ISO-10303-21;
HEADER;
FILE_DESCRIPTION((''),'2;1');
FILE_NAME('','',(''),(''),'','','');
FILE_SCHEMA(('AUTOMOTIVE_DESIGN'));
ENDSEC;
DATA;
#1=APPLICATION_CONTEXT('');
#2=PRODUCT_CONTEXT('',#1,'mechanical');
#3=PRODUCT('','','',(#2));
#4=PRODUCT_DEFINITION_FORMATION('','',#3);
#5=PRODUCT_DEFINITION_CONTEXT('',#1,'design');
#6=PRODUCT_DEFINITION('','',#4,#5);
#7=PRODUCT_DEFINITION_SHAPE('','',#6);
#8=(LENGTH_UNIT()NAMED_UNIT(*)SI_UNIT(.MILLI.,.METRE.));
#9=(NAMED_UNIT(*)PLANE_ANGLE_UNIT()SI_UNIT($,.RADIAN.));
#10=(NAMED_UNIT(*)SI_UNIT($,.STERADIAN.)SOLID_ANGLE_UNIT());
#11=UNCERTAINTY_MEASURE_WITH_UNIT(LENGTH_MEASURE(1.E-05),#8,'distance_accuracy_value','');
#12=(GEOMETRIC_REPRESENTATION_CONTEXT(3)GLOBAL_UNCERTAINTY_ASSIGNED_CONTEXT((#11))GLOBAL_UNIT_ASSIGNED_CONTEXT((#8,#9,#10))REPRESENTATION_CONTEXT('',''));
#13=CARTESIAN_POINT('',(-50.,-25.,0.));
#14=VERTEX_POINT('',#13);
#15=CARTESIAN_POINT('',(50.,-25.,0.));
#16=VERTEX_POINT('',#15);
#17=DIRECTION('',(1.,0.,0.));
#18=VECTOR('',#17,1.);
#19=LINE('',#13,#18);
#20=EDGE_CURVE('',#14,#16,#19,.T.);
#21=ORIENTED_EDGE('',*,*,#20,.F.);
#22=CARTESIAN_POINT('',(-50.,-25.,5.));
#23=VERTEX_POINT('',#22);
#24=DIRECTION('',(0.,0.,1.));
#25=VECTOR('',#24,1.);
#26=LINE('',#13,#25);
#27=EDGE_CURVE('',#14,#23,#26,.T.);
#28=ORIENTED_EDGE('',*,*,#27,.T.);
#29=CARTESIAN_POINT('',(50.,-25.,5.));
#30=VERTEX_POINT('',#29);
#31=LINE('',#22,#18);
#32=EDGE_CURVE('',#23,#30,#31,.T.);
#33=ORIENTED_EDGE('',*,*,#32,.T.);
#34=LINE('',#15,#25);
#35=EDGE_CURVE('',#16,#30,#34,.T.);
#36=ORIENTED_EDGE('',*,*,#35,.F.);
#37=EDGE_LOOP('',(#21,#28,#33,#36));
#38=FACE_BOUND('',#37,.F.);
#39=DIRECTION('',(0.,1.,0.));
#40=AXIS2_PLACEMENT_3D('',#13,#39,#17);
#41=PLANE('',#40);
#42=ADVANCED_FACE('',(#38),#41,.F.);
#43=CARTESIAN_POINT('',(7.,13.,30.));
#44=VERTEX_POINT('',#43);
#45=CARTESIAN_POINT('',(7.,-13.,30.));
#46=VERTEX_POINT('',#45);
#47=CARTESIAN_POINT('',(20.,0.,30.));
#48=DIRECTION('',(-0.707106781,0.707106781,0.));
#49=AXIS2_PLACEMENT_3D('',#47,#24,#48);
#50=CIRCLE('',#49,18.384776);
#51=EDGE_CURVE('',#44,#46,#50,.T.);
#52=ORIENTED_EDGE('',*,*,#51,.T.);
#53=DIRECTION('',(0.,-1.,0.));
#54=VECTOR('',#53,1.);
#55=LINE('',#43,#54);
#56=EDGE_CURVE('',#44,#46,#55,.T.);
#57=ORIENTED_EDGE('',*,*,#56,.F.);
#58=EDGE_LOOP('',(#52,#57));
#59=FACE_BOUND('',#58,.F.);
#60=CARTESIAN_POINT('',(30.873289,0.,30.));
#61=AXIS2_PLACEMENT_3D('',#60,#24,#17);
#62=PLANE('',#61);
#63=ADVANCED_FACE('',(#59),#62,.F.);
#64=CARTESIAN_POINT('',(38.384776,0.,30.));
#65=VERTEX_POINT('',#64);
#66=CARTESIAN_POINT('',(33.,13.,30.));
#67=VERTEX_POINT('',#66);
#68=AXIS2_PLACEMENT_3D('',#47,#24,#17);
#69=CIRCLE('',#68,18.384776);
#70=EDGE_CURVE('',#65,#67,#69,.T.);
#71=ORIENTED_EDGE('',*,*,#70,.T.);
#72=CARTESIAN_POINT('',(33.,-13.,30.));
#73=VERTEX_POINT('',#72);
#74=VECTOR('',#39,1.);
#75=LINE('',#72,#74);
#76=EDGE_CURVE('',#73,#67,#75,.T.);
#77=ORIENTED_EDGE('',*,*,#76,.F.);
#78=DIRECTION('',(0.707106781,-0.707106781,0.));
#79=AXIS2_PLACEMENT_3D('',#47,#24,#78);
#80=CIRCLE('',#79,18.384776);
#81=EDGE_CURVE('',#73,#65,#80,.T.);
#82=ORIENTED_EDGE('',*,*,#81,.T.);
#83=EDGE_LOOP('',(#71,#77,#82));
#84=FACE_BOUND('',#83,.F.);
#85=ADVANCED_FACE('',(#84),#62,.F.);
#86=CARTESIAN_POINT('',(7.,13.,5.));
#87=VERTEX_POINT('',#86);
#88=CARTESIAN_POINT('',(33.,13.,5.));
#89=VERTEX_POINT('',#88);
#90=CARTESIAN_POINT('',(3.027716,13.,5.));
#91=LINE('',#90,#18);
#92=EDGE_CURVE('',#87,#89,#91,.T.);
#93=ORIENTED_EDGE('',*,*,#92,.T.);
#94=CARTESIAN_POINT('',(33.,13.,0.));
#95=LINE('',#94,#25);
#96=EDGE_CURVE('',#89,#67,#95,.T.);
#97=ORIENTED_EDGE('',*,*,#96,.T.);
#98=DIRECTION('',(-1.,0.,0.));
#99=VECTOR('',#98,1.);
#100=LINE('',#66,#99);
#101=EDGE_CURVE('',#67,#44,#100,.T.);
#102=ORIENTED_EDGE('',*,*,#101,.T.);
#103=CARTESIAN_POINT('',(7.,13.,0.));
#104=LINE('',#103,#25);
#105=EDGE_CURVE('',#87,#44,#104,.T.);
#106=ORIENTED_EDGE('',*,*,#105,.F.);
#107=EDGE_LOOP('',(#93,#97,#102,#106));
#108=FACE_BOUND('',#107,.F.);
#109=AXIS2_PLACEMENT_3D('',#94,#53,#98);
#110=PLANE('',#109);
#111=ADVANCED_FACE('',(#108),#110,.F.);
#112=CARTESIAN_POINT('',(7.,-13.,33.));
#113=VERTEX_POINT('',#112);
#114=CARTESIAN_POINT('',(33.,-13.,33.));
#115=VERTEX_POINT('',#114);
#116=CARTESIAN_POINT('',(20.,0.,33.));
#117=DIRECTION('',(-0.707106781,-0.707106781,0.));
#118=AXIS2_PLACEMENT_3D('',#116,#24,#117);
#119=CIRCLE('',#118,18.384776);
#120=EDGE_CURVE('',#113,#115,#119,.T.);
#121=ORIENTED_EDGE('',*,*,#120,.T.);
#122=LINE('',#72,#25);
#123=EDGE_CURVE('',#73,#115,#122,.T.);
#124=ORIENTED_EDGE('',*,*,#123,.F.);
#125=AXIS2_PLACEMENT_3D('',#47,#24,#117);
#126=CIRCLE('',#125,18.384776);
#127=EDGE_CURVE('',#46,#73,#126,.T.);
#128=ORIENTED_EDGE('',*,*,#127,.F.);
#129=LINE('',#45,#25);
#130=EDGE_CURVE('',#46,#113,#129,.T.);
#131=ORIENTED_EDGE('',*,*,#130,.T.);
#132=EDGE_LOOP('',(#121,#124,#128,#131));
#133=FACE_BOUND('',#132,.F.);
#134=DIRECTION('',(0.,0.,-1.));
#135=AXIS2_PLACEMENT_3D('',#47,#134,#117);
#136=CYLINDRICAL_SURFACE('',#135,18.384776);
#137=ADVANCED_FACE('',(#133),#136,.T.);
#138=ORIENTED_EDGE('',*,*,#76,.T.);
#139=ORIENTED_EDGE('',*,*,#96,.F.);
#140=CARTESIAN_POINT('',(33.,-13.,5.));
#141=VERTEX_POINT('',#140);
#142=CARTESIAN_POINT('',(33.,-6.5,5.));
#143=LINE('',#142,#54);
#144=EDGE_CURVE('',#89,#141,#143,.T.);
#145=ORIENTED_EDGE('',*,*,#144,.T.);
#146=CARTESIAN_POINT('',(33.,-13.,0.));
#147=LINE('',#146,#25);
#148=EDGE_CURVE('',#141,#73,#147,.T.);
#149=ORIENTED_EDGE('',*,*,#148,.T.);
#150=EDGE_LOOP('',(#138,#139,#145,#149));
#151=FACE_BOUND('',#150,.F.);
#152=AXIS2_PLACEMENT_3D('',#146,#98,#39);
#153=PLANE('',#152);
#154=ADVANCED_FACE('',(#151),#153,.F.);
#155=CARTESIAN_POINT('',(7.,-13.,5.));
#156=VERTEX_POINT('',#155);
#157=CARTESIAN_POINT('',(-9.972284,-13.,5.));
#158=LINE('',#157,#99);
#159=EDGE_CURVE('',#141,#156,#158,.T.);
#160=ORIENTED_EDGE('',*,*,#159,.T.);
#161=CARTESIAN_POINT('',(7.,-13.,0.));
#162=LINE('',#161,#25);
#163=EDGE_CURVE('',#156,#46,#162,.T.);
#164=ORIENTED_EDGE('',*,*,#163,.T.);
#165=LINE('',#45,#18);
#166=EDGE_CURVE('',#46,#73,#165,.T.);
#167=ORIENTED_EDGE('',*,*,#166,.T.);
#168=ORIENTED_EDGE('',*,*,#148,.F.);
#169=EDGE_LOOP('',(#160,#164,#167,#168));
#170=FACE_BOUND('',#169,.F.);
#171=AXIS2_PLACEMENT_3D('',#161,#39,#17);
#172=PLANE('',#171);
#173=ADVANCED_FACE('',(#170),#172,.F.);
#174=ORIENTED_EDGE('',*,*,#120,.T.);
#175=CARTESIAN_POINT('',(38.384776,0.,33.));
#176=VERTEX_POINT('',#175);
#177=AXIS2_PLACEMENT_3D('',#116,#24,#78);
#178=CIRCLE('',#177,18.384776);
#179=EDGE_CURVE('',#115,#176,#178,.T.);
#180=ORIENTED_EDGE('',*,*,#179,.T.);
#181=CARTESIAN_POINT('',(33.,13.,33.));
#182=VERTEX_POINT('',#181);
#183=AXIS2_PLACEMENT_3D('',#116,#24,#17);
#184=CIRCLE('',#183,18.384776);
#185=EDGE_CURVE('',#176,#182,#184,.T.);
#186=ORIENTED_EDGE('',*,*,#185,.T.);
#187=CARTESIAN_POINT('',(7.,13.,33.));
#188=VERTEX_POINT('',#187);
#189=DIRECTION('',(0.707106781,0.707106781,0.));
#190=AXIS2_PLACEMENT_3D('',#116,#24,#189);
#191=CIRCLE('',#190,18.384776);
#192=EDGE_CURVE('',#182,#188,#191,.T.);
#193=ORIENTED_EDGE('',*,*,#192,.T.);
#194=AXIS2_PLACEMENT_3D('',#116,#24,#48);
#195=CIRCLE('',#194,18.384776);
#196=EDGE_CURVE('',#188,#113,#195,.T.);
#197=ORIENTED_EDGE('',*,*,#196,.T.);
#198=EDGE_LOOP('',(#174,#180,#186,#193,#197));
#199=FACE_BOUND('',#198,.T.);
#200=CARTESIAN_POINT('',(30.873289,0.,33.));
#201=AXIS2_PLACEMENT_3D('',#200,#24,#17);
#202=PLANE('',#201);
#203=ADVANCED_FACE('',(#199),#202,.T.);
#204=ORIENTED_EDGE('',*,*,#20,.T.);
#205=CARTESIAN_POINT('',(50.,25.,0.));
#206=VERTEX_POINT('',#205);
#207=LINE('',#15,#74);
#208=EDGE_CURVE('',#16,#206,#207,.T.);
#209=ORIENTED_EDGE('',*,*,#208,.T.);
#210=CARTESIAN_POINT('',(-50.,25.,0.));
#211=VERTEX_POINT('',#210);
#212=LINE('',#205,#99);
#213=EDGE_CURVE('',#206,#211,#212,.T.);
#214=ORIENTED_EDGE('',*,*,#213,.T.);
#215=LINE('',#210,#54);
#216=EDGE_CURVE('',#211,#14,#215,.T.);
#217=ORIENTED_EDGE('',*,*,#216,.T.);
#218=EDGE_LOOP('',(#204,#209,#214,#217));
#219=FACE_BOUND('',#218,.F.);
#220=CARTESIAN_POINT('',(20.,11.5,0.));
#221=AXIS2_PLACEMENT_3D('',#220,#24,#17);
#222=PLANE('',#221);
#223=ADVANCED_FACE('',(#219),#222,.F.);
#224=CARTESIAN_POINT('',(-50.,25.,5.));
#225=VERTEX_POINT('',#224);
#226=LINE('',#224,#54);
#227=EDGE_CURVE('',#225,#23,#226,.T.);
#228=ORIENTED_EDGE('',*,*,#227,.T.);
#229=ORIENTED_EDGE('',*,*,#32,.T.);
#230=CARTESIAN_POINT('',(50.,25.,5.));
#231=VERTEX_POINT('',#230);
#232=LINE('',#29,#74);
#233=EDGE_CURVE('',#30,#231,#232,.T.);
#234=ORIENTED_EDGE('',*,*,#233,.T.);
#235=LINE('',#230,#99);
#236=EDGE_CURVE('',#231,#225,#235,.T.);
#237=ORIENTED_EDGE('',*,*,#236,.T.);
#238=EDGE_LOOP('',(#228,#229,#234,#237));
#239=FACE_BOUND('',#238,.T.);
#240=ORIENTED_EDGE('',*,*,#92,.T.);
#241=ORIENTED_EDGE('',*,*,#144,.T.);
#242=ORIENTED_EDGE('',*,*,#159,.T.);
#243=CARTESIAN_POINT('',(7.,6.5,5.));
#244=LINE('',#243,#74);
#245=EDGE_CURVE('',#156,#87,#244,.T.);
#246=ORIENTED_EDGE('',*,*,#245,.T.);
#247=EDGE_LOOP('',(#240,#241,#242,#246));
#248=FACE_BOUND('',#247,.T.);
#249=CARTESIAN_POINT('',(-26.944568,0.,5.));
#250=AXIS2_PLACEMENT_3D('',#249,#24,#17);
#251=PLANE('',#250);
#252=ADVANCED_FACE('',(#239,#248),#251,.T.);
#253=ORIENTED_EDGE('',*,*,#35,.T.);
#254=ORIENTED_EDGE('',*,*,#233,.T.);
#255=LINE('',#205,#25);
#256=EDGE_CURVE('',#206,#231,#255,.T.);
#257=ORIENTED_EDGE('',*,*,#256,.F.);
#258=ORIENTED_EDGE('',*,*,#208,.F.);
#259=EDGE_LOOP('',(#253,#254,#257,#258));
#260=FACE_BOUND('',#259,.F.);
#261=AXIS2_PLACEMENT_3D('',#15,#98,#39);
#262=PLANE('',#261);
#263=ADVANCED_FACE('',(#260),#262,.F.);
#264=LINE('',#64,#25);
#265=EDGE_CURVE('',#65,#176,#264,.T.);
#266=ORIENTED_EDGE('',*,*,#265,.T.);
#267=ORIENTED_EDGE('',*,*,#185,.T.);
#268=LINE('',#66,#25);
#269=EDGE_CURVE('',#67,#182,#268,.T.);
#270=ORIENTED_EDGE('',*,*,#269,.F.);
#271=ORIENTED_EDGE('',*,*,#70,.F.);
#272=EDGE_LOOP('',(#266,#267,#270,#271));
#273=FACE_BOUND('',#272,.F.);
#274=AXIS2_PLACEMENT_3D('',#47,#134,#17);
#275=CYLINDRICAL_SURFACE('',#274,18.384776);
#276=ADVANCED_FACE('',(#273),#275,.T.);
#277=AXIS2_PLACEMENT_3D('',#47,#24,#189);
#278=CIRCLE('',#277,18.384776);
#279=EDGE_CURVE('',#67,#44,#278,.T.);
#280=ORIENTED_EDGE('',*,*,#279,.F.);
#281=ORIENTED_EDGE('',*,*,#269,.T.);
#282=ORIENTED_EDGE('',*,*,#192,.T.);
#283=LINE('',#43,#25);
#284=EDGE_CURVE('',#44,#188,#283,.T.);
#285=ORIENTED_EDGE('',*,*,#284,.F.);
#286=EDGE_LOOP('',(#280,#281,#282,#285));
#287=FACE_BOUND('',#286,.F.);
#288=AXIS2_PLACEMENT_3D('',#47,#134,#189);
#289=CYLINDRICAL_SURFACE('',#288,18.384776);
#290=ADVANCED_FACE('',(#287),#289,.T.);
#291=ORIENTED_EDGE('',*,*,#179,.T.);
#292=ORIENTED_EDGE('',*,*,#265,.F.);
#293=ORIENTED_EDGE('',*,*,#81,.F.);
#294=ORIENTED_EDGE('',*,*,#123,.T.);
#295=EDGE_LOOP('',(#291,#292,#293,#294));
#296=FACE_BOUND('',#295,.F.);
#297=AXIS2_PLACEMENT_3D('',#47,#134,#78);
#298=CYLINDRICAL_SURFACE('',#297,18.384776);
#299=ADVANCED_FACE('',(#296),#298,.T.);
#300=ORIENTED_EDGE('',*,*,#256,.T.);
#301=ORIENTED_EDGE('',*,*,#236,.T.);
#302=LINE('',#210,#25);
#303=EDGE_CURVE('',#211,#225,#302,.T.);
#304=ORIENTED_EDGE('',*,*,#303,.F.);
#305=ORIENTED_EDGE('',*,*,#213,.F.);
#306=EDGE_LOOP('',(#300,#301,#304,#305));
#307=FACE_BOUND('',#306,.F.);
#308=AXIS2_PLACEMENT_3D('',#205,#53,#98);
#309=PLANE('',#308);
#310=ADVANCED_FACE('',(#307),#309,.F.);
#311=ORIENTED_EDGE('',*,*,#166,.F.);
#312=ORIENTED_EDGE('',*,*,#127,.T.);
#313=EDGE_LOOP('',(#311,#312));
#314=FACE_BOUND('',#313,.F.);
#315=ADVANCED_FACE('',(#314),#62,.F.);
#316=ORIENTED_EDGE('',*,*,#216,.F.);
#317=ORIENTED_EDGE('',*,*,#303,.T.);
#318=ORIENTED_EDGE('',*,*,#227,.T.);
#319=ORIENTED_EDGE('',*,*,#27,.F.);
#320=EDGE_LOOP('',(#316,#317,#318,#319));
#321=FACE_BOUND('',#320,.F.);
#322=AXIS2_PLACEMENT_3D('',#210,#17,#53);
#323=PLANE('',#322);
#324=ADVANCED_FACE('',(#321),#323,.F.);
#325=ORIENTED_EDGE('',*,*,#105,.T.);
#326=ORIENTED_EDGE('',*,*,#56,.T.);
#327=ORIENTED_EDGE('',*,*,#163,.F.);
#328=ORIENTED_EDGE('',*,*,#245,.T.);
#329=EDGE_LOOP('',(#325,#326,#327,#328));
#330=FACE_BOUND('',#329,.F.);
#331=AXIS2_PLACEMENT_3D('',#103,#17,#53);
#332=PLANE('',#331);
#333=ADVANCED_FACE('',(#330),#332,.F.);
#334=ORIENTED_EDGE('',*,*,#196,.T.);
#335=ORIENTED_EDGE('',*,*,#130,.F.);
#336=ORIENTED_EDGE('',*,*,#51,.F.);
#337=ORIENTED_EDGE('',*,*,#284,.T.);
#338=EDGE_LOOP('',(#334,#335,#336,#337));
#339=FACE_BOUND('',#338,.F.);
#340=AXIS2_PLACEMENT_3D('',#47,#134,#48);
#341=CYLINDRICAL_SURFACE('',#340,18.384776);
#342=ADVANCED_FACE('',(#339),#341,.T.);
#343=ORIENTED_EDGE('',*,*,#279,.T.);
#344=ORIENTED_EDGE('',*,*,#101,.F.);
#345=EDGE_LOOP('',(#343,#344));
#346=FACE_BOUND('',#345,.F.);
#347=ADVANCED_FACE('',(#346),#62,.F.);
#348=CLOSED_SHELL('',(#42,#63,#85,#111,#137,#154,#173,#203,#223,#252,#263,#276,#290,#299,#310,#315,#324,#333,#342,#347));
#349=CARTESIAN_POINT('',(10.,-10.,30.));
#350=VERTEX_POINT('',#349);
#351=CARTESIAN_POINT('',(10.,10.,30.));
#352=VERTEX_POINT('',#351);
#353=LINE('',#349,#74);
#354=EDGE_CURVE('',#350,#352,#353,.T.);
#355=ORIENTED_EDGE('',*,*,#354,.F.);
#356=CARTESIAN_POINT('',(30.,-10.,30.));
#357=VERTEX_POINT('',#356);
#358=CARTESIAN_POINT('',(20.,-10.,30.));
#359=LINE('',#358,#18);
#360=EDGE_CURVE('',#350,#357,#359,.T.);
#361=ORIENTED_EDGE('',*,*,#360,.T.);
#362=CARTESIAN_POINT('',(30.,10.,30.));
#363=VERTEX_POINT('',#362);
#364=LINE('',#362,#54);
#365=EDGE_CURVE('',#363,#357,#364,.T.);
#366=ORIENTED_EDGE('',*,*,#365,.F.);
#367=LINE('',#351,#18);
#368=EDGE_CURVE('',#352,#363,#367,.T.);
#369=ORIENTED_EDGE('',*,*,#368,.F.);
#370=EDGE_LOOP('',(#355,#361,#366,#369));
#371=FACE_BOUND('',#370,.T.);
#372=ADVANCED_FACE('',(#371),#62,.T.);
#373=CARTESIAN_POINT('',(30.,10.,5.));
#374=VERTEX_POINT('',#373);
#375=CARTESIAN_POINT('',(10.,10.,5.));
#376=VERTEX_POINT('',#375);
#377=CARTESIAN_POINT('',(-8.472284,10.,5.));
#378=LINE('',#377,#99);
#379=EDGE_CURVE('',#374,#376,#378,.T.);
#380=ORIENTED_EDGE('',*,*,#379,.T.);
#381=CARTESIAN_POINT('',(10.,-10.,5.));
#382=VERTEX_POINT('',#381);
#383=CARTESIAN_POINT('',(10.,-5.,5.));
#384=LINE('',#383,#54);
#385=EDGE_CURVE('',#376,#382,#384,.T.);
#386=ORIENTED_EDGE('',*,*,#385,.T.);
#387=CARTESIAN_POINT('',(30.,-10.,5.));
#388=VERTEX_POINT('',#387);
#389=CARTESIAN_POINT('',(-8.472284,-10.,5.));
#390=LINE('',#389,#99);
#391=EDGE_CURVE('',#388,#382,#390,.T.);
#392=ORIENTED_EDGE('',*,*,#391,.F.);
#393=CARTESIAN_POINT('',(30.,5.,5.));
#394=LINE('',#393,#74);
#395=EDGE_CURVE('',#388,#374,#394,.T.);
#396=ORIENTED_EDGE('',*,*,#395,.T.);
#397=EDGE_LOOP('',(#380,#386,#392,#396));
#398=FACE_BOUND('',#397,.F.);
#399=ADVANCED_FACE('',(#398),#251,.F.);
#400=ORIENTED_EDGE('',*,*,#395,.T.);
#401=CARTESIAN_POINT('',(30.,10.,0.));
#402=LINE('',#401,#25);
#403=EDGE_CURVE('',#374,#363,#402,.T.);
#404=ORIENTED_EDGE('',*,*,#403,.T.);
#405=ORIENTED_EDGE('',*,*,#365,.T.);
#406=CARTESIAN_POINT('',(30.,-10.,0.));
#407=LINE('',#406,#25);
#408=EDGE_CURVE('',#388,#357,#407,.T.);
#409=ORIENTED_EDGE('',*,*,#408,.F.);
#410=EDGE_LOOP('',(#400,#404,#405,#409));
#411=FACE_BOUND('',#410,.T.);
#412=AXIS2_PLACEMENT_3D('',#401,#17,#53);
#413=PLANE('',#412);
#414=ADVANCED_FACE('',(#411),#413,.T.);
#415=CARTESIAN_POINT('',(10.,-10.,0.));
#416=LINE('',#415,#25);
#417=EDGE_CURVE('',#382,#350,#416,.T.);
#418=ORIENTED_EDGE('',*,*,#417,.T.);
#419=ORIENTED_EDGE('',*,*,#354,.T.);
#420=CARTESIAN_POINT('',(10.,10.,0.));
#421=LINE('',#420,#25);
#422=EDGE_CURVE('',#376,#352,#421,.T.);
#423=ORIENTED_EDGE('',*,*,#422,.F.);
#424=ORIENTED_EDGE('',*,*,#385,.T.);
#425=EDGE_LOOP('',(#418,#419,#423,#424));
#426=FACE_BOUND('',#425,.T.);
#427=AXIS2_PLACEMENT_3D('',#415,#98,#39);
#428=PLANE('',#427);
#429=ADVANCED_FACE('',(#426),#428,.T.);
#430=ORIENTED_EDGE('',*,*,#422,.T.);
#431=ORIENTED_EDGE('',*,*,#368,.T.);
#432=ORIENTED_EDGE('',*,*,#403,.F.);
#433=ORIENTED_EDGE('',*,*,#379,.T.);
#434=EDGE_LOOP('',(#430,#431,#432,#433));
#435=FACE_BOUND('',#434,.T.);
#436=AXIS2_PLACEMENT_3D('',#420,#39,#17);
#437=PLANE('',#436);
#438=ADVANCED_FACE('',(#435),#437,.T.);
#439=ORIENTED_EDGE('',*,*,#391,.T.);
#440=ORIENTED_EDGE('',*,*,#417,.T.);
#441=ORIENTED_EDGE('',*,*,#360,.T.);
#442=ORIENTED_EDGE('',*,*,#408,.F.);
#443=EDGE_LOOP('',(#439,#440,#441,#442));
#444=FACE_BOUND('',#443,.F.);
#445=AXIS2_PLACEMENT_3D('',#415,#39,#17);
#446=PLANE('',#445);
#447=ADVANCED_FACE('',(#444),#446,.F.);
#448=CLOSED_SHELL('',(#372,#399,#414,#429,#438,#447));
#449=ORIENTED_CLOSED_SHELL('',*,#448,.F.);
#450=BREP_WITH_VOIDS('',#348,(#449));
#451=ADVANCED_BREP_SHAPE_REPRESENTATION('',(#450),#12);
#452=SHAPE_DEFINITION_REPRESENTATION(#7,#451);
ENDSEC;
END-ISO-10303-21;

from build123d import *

# Parameters (mm, degrees)
F0_W     = 20
F0_H     = 12
F0_H_2   = 20
F0_W_2   = 17
F0_H_3   = 3
F0_W_3   = 3
F0_W_4   = 10.8891367149
F0_H_4   = 26
F1_DEPTH = 5
F2_DEPTH = 30
F4_DEPTH = 3


# Not quite as in the source:
# - a feature names something its author has since deleted; it is built from what else it names


with BuildPart() as f1:
    # F0 (on Top) → F1 (new body)
    with BuildSketch(Plane.XY):
        Polygon((-50, 25), (-50, -25), (-3.8891367149, -25), (-3.8891367149, -13), (-3.8891367149, 13), (-3.8891367149, 25), align=None)
        Polygon((-3.8891367149, -13), (-3.8891367149, -25), (10, -25), (10, -13), (7, -13), align=None)
        with Locations((20, -19)):
            Rectangle(F0_W, F0_H)
        Polygon((30, -13), (30, -25), (50, -25), (50, -13), (33, -13), align=None)
        Polygon((50, 25), (30, 25), (30, 13), (33, 13), (50, 13), align=None)
        with Locations((20, 0)):
            Rectangle(F0_W, F0_H_2)
        with Locations((41.5, 0)):
            Rectangle(F0_W_2, F0_H_2)
        with Locations((20, 19)):
            Rectangle(F0_W, F0_H)
        with Locations((20, 11.5)):
            Rectangle(F0_W, F0_H_3)
        with Locations((31.5, 11.5)):
            Rectangle(F0_W_3, F0_H_3)
        with Locations((41.5, 11.5)):
            Rectangle(F0_W_2, F0_H_3)
        with Locations((31.5, 0)):
            Rectangle(F0_W_3, F0_H_2)
        with Locations((41.5, -11.5)):
            Rectangle(F0_W_2, F0_H_3)
        with Locations((31.5, -11.5)):
            Rectangle(F0_W_3, F0_H_3)
        with Locations((20, -11.5)):
            Rectangle(F0_W, F0_H_3)
        with Locations((1.5554316426, 0)):
            Rectangle(F0_W_4, F0_H_4)
        Polygon((10, 25), (-3.8891367149, 25), (-3.8891367149, 13), (7, 13), (10, 13), align=None)
        Polygon((7, -13), (10, -13), (10, -10), (10, 10), (10, 13), (7, 13), align=None)
    extrude(amount=F1_DEPTH)

    # F0 (on Top) → F2 (join)
    with BuildSketch(Plane.XY):
        with Locations((20, 11.5)):
            Rectangle(F0_W, F0_H_3)
        with Locations((31.5, 11.5)):
            Rectangle(F0_W_3, F0_H_3)
        with Locations((31.5, 0)):
            Rectangle(F0_W_3, F0_H_2)
        with Locations((31.5, -11.5)):
            Rectangle(F0_W_3, F0_H_3)
        with Locations((20, -11.5)):
            Rectangle(F0_W, F0_H_3)
        Polygon((7, -13), (10, -13), (10, -10), (10, 10), (10, 13), (7, 13), align=None)
    extrude(amount=F2_DEPTH)

    # F3 (on face) → F4 (join)
    with BuildSketch(Plane.XY.offset(30)):
        with BuildLine():
            ThreePointArc((38.3847763109, 0), (36.9853185434, 7.0355493019), (33, 13))
            Line((33, 13), (20, 0))
            Line((20, 0), (33, -13))
            ThreePointArc((33, -13), (36.9853185434, -7.0355493019), (38.3847763109, 0))
        make_face()
        with BuildLine():
            Line((20, 0), (33, 13))
            ThreePointArc((33, 13), (20, 18.3847763109), (7, 13))
            Line((7, 13), (20, 0))
        make_face()
        with BuildLine():
            Line((33, -13), (20, 0))
            Line((20, 0), (7, -13))
            ThreePointArc((7, -13), (20, -18.3847763109), (33, -13))
        make_face()
        Polygon((7, -13), (20, 0), (7, 13), align=None)
        with BuildLine():
            Line((7, -13), (7, 13))
            ThreePointArc((7, 13), (1.6152236891, 0), (7, -13))
        make_face()
    extrude(amount=F4_DEPTH)


solid = f1.part
